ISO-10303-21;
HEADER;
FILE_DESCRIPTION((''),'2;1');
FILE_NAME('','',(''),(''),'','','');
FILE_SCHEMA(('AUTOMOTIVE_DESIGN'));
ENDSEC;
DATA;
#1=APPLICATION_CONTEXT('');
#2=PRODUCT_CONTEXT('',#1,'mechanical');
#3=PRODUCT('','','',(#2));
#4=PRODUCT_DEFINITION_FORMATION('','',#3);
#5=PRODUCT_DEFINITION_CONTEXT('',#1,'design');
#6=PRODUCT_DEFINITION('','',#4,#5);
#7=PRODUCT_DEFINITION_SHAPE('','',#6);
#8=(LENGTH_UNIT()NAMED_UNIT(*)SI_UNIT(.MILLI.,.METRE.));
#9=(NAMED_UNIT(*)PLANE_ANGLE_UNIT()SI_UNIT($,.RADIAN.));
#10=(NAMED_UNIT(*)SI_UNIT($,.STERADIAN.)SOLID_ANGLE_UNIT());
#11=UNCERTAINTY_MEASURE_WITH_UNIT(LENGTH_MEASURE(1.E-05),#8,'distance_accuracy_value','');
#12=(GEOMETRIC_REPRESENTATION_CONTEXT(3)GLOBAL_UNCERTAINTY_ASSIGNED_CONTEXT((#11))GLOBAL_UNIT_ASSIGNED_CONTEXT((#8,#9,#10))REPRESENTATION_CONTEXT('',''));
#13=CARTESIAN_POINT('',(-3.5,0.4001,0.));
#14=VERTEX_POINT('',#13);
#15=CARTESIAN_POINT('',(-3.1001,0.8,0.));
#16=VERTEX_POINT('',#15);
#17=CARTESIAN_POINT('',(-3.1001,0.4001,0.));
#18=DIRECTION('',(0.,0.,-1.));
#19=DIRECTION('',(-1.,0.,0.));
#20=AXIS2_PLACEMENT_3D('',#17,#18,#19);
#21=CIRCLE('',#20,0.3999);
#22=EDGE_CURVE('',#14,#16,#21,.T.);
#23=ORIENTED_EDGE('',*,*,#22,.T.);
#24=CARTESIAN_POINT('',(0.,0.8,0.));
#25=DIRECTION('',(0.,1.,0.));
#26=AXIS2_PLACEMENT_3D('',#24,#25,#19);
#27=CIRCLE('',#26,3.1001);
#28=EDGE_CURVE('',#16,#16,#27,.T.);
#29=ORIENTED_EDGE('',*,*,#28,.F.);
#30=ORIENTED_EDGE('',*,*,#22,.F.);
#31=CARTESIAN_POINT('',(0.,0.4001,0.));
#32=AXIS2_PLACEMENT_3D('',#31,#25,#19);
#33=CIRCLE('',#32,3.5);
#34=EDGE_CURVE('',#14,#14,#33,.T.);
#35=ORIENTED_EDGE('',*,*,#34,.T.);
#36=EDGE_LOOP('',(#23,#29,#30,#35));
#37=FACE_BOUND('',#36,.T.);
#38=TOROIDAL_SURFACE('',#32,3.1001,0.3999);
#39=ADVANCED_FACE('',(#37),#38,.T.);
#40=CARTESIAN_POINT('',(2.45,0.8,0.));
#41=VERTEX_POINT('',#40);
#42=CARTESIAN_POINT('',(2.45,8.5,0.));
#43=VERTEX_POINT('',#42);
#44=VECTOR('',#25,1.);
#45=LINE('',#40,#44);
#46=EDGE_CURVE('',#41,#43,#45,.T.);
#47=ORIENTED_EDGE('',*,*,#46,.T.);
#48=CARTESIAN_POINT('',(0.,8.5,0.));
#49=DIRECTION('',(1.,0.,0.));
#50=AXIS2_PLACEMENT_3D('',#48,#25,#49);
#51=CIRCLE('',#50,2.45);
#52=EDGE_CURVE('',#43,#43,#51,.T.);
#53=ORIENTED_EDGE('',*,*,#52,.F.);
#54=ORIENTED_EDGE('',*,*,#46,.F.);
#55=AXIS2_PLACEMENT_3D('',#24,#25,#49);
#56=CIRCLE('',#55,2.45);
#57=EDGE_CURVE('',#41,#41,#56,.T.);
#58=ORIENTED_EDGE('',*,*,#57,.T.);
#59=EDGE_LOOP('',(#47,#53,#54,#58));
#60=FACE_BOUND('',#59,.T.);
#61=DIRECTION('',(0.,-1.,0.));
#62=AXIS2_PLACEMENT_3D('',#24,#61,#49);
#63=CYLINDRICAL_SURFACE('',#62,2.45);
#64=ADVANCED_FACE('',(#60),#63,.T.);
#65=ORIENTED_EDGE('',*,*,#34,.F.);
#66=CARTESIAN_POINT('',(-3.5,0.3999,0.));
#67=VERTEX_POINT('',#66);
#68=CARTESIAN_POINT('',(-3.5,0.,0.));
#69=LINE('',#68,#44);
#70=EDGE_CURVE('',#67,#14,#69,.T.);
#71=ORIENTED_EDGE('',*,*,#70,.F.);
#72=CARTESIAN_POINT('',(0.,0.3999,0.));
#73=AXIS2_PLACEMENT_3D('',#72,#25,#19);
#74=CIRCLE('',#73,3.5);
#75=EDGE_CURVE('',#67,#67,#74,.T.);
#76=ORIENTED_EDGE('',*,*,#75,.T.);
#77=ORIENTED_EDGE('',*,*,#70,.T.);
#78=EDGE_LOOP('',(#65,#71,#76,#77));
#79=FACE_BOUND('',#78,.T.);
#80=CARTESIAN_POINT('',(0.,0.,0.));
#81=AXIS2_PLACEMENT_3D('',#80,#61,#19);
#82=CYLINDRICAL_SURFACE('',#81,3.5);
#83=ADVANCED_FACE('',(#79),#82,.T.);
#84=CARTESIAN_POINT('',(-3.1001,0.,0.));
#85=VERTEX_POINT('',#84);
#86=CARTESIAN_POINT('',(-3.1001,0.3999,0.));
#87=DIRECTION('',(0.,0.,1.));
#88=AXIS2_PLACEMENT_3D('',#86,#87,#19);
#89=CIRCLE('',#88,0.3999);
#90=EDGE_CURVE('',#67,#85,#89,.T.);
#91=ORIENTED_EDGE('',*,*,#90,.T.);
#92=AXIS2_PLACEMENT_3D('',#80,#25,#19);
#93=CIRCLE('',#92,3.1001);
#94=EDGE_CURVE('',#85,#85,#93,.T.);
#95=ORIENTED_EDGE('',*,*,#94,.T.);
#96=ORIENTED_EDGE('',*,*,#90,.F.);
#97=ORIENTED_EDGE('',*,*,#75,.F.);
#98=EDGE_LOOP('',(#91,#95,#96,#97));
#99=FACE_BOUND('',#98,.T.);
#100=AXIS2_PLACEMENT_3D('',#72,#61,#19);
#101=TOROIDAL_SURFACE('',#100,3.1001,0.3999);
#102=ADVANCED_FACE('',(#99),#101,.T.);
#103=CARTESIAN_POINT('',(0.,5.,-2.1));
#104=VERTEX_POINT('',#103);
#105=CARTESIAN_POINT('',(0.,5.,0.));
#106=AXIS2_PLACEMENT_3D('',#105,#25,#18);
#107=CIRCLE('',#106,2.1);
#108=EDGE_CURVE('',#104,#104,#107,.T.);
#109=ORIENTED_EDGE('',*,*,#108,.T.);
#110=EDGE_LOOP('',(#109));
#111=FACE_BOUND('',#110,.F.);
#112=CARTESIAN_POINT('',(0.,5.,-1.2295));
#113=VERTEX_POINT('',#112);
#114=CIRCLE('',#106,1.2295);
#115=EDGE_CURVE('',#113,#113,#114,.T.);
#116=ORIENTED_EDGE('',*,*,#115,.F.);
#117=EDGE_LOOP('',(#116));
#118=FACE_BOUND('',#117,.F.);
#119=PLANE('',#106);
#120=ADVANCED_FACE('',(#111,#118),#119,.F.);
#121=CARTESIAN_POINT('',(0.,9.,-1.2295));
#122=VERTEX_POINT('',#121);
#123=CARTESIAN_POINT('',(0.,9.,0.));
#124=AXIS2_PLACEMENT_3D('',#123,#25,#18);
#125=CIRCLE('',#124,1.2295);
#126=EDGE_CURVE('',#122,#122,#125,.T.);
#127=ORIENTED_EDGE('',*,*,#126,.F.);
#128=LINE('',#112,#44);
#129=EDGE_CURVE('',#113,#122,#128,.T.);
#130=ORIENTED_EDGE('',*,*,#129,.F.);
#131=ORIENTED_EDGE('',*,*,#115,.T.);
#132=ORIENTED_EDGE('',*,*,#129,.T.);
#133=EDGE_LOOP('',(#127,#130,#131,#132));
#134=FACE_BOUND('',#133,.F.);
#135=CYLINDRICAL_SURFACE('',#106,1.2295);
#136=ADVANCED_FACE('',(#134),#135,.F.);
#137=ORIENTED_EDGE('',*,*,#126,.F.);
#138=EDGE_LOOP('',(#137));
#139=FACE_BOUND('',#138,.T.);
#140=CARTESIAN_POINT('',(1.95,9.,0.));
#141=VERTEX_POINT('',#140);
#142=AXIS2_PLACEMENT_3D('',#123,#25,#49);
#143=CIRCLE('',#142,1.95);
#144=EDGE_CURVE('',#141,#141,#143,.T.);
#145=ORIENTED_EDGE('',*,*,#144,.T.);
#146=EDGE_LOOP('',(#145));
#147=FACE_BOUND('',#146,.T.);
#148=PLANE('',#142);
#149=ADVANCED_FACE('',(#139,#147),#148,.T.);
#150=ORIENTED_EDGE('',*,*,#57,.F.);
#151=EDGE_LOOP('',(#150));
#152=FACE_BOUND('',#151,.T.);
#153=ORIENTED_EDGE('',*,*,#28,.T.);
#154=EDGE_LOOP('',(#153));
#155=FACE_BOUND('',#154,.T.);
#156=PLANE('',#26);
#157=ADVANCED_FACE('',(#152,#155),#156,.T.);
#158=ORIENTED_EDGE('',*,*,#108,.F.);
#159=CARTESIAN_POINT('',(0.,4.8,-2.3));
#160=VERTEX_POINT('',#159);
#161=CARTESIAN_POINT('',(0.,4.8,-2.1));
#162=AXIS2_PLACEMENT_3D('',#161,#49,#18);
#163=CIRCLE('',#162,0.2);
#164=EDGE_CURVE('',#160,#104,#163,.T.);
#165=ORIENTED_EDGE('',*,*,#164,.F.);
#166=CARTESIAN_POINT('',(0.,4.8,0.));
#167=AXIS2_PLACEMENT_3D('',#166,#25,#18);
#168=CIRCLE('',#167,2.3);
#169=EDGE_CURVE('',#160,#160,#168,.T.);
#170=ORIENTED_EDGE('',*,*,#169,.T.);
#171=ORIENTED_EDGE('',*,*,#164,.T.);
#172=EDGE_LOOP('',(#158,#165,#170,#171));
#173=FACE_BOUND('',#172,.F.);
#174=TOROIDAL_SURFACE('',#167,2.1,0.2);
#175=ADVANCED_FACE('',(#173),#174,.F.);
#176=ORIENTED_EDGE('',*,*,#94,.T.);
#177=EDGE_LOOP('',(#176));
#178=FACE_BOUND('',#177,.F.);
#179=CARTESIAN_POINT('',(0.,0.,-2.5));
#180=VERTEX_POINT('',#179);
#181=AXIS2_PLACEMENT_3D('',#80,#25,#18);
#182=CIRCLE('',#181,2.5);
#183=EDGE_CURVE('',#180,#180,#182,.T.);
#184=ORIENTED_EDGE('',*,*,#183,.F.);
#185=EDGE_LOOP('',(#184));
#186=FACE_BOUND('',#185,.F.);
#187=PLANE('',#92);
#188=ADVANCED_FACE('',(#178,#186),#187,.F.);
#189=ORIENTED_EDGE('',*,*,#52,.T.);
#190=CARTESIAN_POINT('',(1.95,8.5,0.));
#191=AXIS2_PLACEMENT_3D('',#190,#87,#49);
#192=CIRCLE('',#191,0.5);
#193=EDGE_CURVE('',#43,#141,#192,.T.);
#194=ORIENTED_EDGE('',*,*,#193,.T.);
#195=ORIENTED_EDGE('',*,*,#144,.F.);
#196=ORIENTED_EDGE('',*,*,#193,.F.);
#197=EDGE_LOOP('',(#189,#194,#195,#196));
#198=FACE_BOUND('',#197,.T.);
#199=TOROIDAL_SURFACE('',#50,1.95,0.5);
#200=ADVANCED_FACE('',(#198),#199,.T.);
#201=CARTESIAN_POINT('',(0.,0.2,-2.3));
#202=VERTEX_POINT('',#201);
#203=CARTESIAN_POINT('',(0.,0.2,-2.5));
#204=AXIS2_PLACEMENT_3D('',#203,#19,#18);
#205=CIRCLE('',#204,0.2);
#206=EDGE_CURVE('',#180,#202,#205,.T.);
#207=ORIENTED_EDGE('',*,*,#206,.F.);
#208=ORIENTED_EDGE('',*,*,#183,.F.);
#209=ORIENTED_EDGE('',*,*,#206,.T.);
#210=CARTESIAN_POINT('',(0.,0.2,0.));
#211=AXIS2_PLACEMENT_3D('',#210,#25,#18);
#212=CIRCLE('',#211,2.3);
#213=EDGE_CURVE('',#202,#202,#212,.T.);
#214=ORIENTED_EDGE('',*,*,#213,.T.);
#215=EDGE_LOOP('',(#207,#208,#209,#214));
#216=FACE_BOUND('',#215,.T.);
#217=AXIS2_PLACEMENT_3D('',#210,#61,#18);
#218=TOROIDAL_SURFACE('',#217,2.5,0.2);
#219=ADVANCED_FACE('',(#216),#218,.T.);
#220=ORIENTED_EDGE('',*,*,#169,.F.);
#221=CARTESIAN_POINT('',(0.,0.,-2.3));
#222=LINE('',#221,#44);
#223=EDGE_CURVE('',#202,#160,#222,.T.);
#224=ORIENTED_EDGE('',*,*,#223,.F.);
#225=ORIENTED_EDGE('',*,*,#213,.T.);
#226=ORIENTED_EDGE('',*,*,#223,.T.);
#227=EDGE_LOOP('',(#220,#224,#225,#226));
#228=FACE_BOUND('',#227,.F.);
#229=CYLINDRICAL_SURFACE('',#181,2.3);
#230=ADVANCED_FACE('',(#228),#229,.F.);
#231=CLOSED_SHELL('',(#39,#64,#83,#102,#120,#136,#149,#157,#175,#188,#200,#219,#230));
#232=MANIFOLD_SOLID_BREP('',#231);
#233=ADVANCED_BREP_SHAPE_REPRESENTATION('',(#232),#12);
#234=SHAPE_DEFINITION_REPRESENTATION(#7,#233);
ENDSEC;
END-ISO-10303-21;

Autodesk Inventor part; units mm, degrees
ref_plane "YZ Plane" through (0, 0, 0) normal (1, 0, 0) x (0, 1, 0)
ref_plane "XZ Plane" through (0, 0, 0) normal (0, 1, 0) x (-1, 0, 0)
ref_plane "XY Plane" through (0, 0, 0) normal (0, 0, 1) x (1, 0, 0)
sketch "スケッチ1" plane through (0, 0, 0) normal (0, 1, 0) x (-1, 0, 0)
  circle A0 centre (0, 0) radius 3.5
  dimension "d0" = 7
extrude "押し出し1" add sketch "スケッチ1" along normal blind 0.8
sketch "スケッチ2" plane through (0, 0.8, 0) normal (0, 1, 0) x (1, 0, 0)
  circle A0 centre (0, 0) radius 2.45
  dimension "d3" = 4.9
extrude "押し出し2" add sketch "スケッチ2" along normal blind 8.2
fillet "フィレット1" radius 0.4 2 edges at (3.5, 0, 0) (3.5, 0.8, 0)
sketch "スケッチ3" plane through (0, 0, 0) normal (0, -1, 0) x (1, 0, 0)
  point P0 (0, 0)
  point P1 (0, 0)
hole "穴1" at (0, 0, 0) direction (0, 1, 0) diameter 2.459 end through all counterbore diameter 4.6 counterbore depth 5 thread size "M3x0.5" class "6H" standard "ISO Metric profile"
fillet "フィレット2" radius 0.2 2 edges at (0, 0, 2.3) (0, 5, 2.3)
fillet "フィレット2" radius 0.5 1 edges at (-2.45, 9, 0)
properties part number "M3-RivetNut"
